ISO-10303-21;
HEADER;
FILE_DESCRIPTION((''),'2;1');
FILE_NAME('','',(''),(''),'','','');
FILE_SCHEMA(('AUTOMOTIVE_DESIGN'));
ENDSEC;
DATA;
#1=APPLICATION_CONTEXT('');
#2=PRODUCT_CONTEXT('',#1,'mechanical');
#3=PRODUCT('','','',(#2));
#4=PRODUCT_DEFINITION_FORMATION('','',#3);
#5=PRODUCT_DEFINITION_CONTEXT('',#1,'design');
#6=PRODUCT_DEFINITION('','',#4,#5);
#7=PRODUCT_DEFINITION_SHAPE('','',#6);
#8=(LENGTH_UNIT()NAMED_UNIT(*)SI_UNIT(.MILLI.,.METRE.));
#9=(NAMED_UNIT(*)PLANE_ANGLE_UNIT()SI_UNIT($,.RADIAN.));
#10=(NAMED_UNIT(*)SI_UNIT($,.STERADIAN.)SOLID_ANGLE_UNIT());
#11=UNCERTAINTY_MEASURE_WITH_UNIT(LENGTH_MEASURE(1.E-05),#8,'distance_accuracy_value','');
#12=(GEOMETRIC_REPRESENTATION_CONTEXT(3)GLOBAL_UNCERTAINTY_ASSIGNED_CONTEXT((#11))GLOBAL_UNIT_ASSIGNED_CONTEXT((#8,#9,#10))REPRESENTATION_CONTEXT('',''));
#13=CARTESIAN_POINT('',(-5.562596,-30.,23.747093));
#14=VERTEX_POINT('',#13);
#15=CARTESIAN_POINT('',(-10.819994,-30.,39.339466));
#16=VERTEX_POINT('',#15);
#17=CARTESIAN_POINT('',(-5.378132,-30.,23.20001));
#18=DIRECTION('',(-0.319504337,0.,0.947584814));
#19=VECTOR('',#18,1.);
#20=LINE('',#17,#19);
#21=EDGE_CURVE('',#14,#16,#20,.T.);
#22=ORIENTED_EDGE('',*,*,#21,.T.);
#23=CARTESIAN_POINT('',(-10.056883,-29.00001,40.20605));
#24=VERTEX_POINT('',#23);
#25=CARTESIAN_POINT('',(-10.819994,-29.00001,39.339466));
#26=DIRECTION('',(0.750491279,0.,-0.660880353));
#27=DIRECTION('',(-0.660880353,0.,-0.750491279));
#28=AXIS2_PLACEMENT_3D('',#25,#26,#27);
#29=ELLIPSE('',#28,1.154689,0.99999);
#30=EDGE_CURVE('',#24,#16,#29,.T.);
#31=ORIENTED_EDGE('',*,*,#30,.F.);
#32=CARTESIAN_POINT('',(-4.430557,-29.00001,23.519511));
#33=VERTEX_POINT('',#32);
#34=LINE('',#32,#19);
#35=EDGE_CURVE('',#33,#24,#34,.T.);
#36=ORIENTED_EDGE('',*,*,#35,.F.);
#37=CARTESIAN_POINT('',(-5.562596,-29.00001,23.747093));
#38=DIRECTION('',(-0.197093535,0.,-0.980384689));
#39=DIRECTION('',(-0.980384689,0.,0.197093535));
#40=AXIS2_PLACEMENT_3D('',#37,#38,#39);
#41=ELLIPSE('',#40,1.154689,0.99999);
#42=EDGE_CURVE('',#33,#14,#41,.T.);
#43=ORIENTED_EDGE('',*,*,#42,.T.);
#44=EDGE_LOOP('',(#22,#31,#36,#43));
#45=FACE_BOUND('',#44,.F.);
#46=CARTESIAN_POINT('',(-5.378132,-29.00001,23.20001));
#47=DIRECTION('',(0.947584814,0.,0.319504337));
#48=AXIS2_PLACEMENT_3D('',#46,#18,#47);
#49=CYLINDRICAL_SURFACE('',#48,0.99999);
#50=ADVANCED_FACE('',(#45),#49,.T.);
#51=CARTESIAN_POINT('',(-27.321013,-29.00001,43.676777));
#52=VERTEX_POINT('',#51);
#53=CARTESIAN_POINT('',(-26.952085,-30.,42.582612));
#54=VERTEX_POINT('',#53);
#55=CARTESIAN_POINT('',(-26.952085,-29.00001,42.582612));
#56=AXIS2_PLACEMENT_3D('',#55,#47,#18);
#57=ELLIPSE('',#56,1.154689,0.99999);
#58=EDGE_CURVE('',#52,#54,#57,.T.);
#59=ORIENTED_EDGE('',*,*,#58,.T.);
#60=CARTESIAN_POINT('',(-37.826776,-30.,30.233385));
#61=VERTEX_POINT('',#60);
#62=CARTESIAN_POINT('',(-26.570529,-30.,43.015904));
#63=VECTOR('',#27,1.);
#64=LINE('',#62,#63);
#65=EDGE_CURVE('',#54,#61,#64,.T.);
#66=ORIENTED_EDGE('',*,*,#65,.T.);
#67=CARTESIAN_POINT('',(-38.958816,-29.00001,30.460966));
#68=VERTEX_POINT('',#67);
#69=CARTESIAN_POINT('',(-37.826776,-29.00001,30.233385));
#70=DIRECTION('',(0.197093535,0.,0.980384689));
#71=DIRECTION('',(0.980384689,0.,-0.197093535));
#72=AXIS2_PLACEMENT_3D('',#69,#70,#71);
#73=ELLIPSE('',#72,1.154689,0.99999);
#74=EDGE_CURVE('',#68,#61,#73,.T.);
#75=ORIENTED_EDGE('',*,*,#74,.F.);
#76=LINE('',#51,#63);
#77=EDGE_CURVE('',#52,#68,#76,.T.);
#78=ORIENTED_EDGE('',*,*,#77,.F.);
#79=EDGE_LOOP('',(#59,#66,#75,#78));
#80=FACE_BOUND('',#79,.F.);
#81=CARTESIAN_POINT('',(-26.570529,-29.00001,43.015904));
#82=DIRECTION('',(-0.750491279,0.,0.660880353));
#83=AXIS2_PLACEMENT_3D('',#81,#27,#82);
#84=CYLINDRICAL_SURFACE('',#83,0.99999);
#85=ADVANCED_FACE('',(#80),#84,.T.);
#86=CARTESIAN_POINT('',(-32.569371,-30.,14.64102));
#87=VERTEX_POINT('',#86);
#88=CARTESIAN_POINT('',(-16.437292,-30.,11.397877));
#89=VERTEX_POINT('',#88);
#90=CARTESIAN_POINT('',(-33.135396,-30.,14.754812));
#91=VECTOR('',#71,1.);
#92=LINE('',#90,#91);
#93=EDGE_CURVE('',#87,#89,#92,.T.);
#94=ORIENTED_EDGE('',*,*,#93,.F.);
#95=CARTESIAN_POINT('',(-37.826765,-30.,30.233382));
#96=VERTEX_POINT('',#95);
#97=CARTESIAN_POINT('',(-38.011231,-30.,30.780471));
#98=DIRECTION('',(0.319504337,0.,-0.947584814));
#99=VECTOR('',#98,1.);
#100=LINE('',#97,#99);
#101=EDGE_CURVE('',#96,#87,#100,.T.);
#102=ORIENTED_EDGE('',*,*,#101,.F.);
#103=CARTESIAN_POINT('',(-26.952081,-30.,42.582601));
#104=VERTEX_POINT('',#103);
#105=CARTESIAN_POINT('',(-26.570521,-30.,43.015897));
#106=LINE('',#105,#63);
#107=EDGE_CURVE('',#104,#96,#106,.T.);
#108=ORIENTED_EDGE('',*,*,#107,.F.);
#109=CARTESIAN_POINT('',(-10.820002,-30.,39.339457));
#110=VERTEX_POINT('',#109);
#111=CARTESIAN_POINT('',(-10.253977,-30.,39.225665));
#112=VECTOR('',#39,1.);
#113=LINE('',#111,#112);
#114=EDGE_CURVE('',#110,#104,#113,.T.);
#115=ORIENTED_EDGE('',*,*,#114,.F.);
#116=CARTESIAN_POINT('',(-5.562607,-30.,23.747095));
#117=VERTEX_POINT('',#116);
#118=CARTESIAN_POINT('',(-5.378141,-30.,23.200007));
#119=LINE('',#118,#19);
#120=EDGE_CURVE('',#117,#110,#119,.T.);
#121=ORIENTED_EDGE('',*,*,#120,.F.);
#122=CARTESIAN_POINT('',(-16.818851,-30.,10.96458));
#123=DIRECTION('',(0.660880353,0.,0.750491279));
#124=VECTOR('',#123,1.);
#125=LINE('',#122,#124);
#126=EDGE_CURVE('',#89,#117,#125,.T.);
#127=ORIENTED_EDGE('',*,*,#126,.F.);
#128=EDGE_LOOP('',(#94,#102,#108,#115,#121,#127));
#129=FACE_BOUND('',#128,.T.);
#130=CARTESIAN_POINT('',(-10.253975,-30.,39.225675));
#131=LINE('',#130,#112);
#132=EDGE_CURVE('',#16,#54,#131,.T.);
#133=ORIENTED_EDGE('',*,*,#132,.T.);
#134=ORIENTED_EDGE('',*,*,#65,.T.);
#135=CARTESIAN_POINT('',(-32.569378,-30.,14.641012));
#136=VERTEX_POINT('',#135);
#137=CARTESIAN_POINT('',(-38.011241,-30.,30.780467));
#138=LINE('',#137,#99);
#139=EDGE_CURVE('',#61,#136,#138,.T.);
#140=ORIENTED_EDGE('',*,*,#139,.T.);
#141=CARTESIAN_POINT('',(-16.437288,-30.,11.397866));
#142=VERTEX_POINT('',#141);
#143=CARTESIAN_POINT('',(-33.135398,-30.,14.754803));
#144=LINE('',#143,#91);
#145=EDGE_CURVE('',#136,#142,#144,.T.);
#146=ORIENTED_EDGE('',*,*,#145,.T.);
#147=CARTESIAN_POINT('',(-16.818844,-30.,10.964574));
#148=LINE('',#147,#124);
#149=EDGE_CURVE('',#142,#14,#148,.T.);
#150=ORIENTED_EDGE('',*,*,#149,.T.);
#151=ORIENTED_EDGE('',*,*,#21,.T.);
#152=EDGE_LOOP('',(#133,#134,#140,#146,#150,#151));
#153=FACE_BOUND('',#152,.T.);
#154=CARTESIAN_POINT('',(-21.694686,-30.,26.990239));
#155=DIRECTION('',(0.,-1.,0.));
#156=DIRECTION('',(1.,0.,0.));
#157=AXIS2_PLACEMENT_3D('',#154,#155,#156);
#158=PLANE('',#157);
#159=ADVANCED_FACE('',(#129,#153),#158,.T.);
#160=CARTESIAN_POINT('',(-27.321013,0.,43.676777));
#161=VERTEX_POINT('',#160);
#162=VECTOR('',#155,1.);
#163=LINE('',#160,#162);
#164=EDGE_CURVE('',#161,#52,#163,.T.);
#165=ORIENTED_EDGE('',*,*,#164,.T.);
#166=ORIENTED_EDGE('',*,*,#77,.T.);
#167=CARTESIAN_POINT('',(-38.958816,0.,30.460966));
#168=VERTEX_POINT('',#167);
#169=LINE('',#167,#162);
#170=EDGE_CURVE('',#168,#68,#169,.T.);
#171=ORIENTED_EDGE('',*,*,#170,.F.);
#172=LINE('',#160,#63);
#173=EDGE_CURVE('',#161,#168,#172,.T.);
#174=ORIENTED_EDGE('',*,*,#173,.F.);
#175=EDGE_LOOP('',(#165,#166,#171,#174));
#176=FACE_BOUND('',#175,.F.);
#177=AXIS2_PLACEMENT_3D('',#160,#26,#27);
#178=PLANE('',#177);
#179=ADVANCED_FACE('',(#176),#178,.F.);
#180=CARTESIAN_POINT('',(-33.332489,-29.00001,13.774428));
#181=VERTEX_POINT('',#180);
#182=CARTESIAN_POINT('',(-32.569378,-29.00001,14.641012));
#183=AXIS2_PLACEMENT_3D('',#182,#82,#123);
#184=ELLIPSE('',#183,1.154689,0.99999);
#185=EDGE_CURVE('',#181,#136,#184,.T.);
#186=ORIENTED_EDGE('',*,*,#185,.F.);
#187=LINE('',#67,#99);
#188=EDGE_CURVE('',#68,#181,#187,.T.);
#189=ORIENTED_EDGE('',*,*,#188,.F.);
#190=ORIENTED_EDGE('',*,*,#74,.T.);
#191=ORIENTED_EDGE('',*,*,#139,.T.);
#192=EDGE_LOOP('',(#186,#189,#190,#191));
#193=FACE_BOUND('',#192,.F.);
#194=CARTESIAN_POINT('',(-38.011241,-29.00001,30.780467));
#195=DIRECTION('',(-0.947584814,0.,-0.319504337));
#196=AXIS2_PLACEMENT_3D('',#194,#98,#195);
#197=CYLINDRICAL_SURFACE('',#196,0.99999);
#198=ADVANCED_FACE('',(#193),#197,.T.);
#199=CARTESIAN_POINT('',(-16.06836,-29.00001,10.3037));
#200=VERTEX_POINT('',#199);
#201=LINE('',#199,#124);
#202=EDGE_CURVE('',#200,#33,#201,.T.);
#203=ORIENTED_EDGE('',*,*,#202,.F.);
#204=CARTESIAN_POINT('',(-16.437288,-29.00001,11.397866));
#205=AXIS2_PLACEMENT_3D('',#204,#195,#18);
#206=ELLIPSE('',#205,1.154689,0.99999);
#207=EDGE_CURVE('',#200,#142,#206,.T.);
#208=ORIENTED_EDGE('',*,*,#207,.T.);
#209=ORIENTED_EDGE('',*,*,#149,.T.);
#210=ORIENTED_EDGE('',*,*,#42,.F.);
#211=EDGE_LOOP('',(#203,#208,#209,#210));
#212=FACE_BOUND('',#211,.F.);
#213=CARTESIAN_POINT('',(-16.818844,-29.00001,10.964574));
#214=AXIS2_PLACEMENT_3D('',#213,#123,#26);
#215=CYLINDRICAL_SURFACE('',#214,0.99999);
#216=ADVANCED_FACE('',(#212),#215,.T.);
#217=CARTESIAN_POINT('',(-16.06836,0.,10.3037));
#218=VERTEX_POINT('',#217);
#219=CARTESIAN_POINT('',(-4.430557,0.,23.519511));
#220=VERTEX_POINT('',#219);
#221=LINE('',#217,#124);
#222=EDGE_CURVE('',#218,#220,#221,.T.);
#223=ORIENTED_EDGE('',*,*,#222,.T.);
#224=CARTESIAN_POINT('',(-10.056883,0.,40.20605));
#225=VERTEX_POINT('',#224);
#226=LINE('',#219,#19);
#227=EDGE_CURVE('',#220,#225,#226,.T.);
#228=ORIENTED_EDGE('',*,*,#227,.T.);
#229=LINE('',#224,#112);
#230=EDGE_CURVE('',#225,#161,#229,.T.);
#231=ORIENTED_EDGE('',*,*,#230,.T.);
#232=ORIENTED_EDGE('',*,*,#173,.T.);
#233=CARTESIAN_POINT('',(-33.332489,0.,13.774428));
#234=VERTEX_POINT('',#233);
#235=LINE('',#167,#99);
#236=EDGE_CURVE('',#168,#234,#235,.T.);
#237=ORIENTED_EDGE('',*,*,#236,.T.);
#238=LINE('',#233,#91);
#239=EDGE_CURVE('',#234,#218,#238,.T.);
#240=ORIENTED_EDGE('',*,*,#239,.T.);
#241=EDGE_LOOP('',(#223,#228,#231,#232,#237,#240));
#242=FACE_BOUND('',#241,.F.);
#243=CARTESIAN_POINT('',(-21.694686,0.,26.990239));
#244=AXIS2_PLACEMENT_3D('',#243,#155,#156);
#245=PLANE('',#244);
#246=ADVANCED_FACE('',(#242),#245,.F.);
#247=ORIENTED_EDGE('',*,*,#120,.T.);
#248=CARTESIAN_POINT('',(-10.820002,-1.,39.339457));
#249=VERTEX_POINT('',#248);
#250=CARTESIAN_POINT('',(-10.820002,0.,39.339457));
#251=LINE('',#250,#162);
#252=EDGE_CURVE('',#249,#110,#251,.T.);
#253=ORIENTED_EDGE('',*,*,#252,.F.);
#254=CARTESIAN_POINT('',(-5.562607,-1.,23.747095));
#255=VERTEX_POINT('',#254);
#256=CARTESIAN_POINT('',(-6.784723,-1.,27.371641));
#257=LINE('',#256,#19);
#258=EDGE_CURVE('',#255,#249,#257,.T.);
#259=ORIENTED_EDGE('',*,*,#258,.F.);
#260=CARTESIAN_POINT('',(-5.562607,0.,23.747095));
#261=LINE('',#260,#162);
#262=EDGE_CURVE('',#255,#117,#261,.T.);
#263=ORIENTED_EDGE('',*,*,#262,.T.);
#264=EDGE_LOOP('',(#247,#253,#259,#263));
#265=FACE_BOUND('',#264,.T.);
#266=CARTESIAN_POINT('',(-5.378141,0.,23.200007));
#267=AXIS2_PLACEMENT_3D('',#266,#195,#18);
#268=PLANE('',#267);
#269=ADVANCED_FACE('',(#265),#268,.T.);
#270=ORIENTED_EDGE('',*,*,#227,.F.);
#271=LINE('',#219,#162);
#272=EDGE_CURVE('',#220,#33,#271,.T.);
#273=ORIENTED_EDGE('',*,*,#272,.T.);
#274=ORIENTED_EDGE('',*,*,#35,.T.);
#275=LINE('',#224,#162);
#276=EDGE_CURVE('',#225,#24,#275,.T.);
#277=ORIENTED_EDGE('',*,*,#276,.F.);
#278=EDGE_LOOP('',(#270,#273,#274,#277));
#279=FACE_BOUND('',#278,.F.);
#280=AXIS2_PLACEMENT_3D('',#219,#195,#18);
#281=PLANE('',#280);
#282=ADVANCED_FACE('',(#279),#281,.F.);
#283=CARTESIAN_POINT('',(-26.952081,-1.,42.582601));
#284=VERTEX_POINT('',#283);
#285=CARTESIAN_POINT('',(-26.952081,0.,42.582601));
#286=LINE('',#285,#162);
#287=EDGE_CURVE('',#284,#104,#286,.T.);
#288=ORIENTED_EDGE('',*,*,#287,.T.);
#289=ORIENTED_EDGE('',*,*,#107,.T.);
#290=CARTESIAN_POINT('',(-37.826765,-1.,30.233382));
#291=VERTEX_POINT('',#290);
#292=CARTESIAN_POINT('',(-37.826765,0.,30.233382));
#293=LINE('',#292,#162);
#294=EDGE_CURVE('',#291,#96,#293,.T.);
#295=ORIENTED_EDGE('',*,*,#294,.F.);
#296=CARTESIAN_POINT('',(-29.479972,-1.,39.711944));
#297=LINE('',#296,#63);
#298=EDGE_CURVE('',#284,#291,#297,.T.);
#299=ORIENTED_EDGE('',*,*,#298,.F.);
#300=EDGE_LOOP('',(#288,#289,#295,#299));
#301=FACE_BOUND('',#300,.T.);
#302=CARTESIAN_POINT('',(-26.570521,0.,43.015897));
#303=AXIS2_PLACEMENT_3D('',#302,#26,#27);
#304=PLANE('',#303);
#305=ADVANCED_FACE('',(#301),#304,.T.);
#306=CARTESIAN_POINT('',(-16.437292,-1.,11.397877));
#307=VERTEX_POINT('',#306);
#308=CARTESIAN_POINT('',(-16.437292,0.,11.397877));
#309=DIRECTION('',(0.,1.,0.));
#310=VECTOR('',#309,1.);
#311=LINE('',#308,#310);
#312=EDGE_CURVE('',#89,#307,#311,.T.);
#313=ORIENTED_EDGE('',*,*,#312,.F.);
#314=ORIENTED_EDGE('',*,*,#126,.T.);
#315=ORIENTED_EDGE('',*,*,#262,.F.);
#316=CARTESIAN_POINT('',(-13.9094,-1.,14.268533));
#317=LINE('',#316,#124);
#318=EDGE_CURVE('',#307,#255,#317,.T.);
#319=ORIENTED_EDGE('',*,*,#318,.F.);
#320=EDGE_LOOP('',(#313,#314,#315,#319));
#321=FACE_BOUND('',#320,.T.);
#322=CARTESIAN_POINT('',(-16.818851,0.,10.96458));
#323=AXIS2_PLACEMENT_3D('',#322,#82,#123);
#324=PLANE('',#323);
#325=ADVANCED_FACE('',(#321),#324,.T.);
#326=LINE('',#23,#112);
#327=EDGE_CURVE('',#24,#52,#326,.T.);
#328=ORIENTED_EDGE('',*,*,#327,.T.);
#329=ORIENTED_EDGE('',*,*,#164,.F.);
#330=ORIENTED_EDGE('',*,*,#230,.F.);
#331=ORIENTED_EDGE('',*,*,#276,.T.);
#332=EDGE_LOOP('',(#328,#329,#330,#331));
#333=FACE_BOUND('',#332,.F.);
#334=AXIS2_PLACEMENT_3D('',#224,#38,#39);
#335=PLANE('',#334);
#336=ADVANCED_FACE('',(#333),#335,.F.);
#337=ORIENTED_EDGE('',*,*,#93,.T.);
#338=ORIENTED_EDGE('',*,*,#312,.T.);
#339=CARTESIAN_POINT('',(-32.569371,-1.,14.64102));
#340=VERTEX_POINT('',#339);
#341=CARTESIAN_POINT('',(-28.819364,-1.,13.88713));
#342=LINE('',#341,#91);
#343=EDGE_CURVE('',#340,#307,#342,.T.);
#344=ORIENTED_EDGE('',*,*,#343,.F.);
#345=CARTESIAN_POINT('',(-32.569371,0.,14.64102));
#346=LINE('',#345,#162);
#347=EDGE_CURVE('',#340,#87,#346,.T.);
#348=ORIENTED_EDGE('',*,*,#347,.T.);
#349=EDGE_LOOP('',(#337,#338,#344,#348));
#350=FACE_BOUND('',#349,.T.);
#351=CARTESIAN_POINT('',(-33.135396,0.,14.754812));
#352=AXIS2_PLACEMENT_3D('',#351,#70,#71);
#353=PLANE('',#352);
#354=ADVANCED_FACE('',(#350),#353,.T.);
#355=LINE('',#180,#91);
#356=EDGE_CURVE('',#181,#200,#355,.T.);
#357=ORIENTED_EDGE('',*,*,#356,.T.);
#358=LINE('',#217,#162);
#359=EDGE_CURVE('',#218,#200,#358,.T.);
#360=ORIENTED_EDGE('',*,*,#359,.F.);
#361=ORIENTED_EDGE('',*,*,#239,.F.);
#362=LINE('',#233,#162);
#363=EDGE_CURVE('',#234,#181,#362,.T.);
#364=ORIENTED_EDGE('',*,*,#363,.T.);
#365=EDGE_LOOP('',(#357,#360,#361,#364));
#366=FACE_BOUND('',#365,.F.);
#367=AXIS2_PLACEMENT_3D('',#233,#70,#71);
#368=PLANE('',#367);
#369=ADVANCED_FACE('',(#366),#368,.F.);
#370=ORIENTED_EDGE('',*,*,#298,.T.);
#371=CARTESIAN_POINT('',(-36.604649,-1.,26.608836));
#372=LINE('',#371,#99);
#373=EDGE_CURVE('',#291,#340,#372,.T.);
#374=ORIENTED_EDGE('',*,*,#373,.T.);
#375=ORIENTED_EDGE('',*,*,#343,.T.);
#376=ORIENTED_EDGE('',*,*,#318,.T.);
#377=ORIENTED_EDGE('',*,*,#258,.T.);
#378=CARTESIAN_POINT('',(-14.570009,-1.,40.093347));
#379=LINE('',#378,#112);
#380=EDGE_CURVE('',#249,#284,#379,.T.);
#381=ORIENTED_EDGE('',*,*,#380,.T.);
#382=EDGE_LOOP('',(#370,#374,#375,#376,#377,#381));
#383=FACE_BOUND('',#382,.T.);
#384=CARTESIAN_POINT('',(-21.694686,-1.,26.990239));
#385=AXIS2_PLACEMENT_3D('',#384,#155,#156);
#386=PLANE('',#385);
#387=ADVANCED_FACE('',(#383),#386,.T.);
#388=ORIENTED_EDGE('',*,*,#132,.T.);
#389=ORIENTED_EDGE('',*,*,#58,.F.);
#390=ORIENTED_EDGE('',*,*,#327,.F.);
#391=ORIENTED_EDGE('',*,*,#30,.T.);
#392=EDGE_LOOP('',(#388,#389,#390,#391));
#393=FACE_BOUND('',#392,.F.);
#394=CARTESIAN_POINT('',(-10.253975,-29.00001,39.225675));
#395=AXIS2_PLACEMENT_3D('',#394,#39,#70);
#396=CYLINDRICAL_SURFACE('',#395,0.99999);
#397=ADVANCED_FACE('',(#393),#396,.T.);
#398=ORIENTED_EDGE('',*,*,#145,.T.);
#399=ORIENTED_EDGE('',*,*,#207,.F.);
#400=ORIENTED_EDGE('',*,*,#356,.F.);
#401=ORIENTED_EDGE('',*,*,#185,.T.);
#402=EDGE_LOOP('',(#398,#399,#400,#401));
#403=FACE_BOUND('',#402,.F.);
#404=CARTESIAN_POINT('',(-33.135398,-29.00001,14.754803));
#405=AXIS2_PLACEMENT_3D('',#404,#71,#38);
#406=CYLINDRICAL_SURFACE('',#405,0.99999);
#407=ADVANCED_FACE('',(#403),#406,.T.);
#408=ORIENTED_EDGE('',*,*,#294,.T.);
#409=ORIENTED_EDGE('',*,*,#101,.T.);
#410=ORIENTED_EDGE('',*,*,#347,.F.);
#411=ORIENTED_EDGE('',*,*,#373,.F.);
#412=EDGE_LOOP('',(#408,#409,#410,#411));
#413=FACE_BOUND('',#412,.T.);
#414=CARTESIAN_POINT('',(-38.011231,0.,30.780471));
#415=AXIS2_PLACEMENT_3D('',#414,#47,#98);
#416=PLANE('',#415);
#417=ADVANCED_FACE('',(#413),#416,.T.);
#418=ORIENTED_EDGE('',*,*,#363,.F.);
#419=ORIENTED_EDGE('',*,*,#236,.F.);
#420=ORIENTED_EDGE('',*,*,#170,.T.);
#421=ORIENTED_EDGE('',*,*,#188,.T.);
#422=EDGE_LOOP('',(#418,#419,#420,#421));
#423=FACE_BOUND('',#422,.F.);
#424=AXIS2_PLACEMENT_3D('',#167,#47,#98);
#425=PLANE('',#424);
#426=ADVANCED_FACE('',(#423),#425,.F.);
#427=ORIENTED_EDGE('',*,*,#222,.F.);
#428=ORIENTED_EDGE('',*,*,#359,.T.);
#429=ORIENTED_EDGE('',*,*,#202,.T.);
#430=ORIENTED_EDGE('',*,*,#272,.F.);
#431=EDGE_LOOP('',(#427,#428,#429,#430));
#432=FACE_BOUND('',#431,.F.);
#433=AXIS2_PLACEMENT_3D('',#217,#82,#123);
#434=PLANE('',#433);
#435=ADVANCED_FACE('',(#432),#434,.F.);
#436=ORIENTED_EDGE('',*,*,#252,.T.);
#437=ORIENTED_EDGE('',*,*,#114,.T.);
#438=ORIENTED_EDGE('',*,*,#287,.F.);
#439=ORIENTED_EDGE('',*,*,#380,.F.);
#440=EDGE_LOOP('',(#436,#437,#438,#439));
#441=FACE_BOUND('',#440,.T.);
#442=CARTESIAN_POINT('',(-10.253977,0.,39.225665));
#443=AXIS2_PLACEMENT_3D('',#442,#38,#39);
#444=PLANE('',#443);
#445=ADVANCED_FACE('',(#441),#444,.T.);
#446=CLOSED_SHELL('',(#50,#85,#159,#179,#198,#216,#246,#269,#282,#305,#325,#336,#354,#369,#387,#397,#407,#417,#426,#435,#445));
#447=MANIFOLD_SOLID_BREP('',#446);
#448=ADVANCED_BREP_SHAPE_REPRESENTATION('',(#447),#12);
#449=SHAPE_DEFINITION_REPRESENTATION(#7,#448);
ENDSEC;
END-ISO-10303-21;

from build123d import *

# Parameters (mm, degrees)
F1_DEPTH = 30
F2_T     = -1
F3_R     = 0.99999


# Not quite as in the source:
# - a fillet or chamfer is up to 0.001 mm smaller than in the source, because OpenCascade refuses the exact size


with BuildPart() as f1:
    # F0 (on Front) → F1 (new body)
    with BuildSketch(Plane.XZ):
        Polygon((-16.0683598468, 10.3036999003), (-4.4305566599, 23.5195108458), (-10.0568830769, 40.2060495226), (-27.3210126808, 43.676777254), (-38.9588158677, 30.4609663085), (-33.3324894507, 13.7744276316), align=None)
    extrude(amount=F1_DEPTH)

    # F2
    f2_openings = [f1.faces().sort_by_distance(p)[0] for p in [
        (-21.694686, -30, 26.990239),
    ]]
    offset(amount=F2_T, openings=f2_openings)

    # F3 (radius 1 in the source; OpenCascade refuses exactly that, so slightly less here)
    f3_edges = [f1.edges().sort_by_distance(p)[0] for p in [
        (-18.688948, -30, 41.941413),
        (-7.24372, -30, 31.86278),
        (-10.249458, -30, 16.911605),
        (-24.700425, -30, 12.039064),
        (-36.145653, -30, 22.117697),
        (-33.139914, -30, 37.068872),
    ]]
    fillet(f3_edges, radius=F3_R)


solid = f1.part
